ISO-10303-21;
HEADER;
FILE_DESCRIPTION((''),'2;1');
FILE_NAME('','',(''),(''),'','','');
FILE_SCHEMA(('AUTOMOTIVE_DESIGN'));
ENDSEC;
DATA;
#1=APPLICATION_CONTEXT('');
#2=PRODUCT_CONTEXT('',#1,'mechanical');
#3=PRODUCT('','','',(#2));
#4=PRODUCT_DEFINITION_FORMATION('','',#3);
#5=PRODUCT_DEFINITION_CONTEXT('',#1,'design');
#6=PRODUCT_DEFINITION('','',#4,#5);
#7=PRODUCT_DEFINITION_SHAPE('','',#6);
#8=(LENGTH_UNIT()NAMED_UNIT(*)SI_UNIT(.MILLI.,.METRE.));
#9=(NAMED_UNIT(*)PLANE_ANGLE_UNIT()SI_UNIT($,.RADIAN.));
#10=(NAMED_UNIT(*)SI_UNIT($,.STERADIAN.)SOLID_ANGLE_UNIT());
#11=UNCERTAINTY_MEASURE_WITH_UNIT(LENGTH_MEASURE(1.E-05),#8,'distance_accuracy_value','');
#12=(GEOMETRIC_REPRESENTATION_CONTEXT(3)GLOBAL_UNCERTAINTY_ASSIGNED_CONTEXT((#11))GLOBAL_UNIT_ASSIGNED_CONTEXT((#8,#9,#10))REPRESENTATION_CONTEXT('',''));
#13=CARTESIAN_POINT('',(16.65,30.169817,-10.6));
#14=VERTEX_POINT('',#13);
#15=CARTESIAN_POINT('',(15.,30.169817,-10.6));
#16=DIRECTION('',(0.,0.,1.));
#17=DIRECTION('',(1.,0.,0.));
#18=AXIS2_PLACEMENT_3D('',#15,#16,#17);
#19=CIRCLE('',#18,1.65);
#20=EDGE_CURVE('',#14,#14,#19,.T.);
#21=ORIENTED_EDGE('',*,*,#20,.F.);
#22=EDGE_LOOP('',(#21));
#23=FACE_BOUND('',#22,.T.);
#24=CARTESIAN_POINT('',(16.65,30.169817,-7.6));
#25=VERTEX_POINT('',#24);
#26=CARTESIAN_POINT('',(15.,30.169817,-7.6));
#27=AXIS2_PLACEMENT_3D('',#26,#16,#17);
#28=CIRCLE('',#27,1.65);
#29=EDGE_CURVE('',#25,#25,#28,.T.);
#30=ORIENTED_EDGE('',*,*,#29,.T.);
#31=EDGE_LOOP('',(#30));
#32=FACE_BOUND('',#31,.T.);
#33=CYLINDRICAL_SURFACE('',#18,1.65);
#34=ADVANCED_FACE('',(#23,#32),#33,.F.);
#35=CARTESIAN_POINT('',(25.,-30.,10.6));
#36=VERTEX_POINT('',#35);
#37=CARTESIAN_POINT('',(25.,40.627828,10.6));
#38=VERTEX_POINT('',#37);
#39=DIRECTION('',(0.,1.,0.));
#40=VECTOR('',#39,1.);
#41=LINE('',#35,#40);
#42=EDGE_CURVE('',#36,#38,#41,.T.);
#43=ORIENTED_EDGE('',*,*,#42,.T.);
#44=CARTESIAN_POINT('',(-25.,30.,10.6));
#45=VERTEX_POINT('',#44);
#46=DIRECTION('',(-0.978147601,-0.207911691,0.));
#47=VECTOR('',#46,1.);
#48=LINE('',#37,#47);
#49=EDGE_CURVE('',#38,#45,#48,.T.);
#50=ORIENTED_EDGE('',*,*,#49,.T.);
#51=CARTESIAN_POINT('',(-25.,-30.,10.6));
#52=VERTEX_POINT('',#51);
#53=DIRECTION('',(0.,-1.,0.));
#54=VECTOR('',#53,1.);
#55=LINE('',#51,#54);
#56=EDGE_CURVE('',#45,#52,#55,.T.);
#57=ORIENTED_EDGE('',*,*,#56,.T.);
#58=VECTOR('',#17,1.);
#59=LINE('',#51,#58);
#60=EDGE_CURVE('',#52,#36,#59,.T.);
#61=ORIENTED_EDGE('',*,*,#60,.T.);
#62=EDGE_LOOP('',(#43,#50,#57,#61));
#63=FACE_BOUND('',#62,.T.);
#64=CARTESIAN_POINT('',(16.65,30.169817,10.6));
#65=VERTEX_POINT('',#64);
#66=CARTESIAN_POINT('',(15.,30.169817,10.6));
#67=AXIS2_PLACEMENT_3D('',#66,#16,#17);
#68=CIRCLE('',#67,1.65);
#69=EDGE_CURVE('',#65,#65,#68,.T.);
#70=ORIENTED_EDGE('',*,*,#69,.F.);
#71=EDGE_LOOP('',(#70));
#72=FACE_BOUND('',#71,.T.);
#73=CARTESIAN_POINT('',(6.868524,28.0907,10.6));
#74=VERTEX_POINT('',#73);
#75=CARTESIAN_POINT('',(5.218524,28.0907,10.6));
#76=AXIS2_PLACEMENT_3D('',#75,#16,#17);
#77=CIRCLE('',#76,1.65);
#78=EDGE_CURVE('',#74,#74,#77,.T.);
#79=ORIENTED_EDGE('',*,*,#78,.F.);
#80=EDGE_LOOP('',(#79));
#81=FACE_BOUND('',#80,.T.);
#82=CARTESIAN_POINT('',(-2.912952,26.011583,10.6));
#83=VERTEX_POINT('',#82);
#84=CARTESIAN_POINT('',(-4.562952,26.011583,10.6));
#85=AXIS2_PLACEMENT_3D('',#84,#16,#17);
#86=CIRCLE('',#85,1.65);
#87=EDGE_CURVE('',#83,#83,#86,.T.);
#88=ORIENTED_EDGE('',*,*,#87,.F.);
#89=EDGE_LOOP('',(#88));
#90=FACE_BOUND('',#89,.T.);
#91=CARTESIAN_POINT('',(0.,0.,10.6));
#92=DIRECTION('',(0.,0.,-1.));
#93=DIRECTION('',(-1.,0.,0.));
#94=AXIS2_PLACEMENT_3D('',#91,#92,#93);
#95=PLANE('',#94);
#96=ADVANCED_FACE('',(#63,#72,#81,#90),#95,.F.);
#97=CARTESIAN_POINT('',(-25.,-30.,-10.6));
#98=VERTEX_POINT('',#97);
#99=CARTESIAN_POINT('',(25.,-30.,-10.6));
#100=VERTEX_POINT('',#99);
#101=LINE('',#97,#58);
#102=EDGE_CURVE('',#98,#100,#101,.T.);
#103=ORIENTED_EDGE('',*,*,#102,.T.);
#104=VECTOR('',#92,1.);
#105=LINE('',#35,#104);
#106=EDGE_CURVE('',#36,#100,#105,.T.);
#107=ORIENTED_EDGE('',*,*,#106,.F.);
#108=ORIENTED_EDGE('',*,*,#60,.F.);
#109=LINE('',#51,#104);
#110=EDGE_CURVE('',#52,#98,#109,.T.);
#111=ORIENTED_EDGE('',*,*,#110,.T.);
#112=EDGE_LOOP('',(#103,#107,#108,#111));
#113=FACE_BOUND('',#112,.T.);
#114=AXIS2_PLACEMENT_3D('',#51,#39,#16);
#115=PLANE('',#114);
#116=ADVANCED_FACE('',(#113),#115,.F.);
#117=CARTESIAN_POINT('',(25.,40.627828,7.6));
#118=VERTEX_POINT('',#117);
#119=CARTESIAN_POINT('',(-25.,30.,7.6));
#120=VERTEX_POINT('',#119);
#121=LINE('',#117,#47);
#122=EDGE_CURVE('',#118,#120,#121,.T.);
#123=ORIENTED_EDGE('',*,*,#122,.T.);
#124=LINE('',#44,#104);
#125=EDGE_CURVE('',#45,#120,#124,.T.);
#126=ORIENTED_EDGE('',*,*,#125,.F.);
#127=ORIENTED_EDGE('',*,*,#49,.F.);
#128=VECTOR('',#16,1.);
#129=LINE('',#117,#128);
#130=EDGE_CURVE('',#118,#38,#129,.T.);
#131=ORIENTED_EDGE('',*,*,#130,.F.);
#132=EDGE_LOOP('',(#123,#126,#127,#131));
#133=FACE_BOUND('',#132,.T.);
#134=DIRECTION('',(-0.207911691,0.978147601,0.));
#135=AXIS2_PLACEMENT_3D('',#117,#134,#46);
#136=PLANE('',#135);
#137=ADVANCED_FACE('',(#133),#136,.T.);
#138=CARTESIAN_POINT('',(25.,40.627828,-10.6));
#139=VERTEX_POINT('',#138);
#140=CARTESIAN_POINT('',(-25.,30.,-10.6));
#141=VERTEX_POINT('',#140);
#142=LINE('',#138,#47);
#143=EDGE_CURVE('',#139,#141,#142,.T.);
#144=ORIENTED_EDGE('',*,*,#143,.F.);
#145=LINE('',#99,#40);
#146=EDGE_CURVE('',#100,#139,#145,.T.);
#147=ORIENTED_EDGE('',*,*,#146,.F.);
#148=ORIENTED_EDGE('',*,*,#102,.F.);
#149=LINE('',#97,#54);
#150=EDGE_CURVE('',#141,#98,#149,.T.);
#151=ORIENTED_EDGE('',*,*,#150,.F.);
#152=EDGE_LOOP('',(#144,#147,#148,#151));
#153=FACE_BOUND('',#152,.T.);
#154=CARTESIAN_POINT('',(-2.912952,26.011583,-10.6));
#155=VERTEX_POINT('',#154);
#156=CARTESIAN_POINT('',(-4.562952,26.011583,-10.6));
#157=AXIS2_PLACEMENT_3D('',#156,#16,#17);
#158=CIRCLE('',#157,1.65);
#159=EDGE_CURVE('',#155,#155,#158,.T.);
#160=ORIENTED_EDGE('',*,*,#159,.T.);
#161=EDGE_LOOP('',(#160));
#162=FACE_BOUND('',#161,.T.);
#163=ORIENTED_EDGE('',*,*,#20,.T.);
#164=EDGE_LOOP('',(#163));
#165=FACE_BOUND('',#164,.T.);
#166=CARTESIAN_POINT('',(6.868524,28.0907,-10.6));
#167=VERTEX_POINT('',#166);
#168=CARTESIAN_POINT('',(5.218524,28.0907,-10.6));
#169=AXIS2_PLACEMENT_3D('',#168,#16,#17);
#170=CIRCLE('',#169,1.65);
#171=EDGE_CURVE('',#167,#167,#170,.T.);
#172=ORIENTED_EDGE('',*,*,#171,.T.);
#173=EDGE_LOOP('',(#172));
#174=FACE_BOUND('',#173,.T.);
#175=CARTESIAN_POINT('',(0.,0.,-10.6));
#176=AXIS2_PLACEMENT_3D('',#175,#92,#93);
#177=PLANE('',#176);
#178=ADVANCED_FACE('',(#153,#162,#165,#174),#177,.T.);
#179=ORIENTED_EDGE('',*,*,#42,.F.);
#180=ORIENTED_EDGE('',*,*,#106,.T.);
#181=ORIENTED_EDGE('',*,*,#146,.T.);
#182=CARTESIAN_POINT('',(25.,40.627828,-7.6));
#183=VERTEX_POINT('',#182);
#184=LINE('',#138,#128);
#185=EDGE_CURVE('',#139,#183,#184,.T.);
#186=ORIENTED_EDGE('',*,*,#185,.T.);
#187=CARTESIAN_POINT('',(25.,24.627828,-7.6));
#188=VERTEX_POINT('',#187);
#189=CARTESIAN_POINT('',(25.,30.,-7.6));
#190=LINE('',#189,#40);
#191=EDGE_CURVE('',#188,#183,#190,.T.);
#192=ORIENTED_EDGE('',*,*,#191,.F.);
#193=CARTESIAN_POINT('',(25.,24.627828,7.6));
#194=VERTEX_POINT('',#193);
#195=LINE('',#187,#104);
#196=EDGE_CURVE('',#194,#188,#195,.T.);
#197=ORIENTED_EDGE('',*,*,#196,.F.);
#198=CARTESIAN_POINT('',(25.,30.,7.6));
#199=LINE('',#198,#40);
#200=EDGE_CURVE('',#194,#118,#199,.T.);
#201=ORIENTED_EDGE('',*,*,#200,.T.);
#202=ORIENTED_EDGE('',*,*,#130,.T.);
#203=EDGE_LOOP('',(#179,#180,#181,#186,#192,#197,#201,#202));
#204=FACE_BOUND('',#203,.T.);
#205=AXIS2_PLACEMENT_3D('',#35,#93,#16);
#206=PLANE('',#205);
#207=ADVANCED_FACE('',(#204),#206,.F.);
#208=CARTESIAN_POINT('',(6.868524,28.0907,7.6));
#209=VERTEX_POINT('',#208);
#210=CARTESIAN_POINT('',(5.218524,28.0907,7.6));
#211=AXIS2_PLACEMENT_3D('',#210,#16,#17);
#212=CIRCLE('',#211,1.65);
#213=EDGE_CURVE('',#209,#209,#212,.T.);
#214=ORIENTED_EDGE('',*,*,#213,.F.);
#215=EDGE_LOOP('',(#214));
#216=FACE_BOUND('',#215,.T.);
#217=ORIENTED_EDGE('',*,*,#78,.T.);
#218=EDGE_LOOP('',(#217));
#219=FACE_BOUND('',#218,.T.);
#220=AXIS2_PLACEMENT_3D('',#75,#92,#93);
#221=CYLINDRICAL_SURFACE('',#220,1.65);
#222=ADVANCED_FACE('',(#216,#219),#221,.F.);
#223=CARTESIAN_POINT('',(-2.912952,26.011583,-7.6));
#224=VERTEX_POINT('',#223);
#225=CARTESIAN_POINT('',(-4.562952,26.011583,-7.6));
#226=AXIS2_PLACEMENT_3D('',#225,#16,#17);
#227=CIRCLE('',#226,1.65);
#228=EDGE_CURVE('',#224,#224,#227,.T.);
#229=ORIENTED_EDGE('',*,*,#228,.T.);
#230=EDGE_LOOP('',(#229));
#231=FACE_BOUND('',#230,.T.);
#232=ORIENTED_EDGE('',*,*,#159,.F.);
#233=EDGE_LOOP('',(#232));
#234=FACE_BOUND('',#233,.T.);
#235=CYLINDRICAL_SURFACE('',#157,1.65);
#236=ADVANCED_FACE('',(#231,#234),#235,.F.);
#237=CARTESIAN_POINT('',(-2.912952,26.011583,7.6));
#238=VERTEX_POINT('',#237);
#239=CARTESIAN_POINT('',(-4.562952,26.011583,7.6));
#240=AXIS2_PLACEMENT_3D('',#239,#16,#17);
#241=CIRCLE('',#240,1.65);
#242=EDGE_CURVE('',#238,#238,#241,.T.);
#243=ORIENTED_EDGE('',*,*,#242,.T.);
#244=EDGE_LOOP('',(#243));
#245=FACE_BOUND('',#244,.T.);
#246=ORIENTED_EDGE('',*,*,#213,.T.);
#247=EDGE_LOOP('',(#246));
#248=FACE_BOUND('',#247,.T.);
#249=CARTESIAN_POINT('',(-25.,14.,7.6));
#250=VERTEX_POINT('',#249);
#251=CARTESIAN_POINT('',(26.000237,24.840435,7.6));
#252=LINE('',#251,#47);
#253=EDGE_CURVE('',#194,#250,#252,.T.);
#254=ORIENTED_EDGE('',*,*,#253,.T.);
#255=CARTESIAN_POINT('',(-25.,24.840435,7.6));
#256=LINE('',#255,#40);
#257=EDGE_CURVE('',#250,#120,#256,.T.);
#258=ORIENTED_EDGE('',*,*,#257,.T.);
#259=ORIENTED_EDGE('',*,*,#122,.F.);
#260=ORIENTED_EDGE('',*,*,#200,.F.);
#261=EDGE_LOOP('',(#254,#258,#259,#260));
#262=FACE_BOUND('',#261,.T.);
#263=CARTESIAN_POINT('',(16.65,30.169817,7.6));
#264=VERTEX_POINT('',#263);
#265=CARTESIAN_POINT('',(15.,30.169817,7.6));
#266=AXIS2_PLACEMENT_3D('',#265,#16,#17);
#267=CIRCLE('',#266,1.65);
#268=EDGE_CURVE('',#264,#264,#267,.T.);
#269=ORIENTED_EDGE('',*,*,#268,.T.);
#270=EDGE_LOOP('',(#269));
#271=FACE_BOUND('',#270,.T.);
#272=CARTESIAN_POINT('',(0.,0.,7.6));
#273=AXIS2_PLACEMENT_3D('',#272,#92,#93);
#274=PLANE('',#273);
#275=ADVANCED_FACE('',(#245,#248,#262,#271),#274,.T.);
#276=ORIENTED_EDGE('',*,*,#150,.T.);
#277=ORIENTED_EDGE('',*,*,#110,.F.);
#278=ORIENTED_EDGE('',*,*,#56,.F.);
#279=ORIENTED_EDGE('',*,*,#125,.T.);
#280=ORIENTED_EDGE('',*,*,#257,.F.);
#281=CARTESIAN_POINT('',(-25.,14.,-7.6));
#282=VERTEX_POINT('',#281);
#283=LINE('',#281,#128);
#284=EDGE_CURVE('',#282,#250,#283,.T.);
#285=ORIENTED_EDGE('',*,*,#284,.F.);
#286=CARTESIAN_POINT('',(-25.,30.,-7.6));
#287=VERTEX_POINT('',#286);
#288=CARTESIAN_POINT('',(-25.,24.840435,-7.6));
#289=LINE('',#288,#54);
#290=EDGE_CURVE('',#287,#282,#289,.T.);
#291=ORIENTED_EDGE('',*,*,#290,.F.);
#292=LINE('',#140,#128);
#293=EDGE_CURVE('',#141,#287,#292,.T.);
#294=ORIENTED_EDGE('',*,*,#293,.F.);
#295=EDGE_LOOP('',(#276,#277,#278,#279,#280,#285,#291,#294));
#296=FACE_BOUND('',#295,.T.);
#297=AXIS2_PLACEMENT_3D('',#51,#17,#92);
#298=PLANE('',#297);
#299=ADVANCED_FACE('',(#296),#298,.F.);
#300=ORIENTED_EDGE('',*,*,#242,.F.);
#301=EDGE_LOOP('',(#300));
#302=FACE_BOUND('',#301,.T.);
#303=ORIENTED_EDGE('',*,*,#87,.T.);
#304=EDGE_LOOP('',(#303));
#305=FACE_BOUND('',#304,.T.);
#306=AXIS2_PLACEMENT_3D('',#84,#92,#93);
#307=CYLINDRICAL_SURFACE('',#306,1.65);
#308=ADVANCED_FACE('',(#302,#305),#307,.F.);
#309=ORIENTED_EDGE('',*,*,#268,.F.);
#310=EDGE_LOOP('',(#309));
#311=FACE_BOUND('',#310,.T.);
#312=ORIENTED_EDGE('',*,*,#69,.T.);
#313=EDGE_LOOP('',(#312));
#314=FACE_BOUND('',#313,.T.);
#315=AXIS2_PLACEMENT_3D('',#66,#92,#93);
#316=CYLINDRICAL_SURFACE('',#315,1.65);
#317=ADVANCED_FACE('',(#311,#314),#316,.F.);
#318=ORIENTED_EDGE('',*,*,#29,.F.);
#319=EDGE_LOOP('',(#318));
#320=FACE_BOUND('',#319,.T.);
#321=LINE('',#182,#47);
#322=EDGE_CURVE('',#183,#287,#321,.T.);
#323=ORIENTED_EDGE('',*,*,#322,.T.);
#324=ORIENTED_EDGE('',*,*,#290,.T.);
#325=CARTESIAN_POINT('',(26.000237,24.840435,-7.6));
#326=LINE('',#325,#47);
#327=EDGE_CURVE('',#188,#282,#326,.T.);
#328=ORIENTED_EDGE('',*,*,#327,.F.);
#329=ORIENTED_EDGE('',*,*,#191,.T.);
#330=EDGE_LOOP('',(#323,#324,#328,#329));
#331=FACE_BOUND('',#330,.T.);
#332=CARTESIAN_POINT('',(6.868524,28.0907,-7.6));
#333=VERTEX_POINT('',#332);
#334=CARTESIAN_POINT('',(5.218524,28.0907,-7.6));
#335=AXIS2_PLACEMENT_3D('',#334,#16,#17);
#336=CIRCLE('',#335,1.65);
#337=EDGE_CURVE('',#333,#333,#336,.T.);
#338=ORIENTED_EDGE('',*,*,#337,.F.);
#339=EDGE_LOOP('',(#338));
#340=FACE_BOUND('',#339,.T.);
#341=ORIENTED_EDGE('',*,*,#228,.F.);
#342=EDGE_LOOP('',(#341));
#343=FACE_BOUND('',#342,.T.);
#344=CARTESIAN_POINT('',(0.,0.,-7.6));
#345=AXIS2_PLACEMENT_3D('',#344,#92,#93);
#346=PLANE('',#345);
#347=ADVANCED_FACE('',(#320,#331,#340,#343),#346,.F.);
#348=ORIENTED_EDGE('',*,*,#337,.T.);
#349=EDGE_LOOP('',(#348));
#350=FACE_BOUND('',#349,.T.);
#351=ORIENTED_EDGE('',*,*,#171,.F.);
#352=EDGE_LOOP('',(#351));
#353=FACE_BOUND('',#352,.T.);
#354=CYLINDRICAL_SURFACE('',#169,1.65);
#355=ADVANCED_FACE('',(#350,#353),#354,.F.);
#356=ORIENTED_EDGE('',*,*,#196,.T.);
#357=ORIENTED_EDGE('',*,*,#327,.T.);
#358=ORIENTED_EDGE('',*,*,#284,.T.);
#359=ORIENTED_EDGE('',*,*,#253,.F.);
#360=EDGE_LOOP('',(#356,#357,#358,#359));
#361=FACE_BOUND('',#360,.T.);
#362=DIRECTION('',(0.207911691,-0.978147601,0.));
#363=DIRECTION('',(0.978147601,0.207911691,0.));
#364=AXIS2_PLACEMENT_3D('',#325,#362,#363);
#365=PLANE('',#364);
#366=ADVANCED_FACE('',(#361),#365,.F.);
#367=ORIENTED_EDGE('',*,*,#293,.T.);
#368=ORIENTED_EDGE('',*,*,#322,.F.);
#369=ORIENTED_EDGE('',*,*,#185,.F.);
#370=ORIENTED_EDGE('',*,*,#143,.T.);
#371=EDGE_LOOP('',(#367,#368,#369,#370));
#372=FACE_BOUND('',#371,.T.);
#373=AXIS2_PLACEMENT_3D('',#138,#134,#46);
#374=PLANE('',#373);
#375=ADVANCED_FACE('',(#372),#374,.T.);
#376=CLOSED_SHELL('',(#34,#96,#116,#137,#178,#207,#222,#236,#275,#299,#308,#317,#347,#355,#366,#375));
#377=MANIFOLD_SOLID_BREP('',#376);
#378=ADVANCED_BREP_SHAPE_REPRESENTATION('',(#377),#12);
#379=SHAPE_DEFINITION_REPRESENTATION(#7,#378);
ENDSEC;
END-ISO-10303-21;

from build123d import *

# Parameters (mm, degrees)
SKETCH_1_W          = 50
SKETCH_1_H          = 60
EXTRUDE_1_DEPTH     = 10.6
EXTRUDE_2_DEPTH     = 3
EXTRUDE_START       = -18.2
EXTRUDE_3_DEPTH     = 3
SKETCH_3_W          = 15.2
SKETCH_3_H          = 16
SKETCH_4_R          = 1.65
CUT_EXTRUDE_1_DEPTH = 3


with BuildPart() as part:
    # 草图1 → 凸台-拉伸1 (new, symmetric)
    with BuildSketch(Plane.XY):
        Rectangle(SKETCH_1_W, SKETCH_1_H)
    extrude(amount=EXTRUDE_1_DEPTH, both=True)

    # 草图2 → 凸台-拉伸2 (add)
    with BuildSketch(Plane.XY.offset(10.6)):
        Polygon((-25, 30), (25, 30), (25, 40.627828084), align=None)
    extrude(amount=-EXTRUDE_2_DEPTH)

    # 草图2<2> → 凸台-拉伸3 (add)
    with BuildSketch(Plane.XY.offset(10.6).offset(EXTRUDE_START)):
        Polygon((-25, 30), (25, 30), (25, 40.627828084), align=None)
    extrude(amount=-EXTRUDE_3_DEPTH)

    # 切除-扫描1: sweep along a curve in space
    with BuildLine() as sweep_1_path:
        Line((25, 40.627828084, 10.6), (-25, 30, 10.6))
    # 草图3 → 切除-扫描1 (sweep, cut)
    with BuildSketch(Plane.ZY.offset(25)):
        with Locations((0, 22)):
            Rectangle(SKETCH_3_W, SKETCH_3_H)
    sweep(path=sweep_1_path.line, mode=Mode.SUBTRACT)

    # 草图4 → 切除-拉伸1 (cut)
    with BuildSketch(Plane.XY.offset(-7.6)):
        with Locations((-4.562952015, 26.011583112)):
            Circle(SKETCH_4_R)
        with Locations((5.218523993, 28.09070002)):
            Circle(SKETCH_4_R)
        with Locations((15, 30.169816928)):
            Circle(SKETCH_4_R)
    cut_extrude_1 = extrude(amount=-CUT_EXTRUDE_1_DEPTH, mode=Mode.SUBTRACT)

    # 镜向1: 切除-拉伸1 across plane
    add(cut_extrude_1.mirror(Plane.XY), mode=Mode.SUBTRACT)


solid = part.part
